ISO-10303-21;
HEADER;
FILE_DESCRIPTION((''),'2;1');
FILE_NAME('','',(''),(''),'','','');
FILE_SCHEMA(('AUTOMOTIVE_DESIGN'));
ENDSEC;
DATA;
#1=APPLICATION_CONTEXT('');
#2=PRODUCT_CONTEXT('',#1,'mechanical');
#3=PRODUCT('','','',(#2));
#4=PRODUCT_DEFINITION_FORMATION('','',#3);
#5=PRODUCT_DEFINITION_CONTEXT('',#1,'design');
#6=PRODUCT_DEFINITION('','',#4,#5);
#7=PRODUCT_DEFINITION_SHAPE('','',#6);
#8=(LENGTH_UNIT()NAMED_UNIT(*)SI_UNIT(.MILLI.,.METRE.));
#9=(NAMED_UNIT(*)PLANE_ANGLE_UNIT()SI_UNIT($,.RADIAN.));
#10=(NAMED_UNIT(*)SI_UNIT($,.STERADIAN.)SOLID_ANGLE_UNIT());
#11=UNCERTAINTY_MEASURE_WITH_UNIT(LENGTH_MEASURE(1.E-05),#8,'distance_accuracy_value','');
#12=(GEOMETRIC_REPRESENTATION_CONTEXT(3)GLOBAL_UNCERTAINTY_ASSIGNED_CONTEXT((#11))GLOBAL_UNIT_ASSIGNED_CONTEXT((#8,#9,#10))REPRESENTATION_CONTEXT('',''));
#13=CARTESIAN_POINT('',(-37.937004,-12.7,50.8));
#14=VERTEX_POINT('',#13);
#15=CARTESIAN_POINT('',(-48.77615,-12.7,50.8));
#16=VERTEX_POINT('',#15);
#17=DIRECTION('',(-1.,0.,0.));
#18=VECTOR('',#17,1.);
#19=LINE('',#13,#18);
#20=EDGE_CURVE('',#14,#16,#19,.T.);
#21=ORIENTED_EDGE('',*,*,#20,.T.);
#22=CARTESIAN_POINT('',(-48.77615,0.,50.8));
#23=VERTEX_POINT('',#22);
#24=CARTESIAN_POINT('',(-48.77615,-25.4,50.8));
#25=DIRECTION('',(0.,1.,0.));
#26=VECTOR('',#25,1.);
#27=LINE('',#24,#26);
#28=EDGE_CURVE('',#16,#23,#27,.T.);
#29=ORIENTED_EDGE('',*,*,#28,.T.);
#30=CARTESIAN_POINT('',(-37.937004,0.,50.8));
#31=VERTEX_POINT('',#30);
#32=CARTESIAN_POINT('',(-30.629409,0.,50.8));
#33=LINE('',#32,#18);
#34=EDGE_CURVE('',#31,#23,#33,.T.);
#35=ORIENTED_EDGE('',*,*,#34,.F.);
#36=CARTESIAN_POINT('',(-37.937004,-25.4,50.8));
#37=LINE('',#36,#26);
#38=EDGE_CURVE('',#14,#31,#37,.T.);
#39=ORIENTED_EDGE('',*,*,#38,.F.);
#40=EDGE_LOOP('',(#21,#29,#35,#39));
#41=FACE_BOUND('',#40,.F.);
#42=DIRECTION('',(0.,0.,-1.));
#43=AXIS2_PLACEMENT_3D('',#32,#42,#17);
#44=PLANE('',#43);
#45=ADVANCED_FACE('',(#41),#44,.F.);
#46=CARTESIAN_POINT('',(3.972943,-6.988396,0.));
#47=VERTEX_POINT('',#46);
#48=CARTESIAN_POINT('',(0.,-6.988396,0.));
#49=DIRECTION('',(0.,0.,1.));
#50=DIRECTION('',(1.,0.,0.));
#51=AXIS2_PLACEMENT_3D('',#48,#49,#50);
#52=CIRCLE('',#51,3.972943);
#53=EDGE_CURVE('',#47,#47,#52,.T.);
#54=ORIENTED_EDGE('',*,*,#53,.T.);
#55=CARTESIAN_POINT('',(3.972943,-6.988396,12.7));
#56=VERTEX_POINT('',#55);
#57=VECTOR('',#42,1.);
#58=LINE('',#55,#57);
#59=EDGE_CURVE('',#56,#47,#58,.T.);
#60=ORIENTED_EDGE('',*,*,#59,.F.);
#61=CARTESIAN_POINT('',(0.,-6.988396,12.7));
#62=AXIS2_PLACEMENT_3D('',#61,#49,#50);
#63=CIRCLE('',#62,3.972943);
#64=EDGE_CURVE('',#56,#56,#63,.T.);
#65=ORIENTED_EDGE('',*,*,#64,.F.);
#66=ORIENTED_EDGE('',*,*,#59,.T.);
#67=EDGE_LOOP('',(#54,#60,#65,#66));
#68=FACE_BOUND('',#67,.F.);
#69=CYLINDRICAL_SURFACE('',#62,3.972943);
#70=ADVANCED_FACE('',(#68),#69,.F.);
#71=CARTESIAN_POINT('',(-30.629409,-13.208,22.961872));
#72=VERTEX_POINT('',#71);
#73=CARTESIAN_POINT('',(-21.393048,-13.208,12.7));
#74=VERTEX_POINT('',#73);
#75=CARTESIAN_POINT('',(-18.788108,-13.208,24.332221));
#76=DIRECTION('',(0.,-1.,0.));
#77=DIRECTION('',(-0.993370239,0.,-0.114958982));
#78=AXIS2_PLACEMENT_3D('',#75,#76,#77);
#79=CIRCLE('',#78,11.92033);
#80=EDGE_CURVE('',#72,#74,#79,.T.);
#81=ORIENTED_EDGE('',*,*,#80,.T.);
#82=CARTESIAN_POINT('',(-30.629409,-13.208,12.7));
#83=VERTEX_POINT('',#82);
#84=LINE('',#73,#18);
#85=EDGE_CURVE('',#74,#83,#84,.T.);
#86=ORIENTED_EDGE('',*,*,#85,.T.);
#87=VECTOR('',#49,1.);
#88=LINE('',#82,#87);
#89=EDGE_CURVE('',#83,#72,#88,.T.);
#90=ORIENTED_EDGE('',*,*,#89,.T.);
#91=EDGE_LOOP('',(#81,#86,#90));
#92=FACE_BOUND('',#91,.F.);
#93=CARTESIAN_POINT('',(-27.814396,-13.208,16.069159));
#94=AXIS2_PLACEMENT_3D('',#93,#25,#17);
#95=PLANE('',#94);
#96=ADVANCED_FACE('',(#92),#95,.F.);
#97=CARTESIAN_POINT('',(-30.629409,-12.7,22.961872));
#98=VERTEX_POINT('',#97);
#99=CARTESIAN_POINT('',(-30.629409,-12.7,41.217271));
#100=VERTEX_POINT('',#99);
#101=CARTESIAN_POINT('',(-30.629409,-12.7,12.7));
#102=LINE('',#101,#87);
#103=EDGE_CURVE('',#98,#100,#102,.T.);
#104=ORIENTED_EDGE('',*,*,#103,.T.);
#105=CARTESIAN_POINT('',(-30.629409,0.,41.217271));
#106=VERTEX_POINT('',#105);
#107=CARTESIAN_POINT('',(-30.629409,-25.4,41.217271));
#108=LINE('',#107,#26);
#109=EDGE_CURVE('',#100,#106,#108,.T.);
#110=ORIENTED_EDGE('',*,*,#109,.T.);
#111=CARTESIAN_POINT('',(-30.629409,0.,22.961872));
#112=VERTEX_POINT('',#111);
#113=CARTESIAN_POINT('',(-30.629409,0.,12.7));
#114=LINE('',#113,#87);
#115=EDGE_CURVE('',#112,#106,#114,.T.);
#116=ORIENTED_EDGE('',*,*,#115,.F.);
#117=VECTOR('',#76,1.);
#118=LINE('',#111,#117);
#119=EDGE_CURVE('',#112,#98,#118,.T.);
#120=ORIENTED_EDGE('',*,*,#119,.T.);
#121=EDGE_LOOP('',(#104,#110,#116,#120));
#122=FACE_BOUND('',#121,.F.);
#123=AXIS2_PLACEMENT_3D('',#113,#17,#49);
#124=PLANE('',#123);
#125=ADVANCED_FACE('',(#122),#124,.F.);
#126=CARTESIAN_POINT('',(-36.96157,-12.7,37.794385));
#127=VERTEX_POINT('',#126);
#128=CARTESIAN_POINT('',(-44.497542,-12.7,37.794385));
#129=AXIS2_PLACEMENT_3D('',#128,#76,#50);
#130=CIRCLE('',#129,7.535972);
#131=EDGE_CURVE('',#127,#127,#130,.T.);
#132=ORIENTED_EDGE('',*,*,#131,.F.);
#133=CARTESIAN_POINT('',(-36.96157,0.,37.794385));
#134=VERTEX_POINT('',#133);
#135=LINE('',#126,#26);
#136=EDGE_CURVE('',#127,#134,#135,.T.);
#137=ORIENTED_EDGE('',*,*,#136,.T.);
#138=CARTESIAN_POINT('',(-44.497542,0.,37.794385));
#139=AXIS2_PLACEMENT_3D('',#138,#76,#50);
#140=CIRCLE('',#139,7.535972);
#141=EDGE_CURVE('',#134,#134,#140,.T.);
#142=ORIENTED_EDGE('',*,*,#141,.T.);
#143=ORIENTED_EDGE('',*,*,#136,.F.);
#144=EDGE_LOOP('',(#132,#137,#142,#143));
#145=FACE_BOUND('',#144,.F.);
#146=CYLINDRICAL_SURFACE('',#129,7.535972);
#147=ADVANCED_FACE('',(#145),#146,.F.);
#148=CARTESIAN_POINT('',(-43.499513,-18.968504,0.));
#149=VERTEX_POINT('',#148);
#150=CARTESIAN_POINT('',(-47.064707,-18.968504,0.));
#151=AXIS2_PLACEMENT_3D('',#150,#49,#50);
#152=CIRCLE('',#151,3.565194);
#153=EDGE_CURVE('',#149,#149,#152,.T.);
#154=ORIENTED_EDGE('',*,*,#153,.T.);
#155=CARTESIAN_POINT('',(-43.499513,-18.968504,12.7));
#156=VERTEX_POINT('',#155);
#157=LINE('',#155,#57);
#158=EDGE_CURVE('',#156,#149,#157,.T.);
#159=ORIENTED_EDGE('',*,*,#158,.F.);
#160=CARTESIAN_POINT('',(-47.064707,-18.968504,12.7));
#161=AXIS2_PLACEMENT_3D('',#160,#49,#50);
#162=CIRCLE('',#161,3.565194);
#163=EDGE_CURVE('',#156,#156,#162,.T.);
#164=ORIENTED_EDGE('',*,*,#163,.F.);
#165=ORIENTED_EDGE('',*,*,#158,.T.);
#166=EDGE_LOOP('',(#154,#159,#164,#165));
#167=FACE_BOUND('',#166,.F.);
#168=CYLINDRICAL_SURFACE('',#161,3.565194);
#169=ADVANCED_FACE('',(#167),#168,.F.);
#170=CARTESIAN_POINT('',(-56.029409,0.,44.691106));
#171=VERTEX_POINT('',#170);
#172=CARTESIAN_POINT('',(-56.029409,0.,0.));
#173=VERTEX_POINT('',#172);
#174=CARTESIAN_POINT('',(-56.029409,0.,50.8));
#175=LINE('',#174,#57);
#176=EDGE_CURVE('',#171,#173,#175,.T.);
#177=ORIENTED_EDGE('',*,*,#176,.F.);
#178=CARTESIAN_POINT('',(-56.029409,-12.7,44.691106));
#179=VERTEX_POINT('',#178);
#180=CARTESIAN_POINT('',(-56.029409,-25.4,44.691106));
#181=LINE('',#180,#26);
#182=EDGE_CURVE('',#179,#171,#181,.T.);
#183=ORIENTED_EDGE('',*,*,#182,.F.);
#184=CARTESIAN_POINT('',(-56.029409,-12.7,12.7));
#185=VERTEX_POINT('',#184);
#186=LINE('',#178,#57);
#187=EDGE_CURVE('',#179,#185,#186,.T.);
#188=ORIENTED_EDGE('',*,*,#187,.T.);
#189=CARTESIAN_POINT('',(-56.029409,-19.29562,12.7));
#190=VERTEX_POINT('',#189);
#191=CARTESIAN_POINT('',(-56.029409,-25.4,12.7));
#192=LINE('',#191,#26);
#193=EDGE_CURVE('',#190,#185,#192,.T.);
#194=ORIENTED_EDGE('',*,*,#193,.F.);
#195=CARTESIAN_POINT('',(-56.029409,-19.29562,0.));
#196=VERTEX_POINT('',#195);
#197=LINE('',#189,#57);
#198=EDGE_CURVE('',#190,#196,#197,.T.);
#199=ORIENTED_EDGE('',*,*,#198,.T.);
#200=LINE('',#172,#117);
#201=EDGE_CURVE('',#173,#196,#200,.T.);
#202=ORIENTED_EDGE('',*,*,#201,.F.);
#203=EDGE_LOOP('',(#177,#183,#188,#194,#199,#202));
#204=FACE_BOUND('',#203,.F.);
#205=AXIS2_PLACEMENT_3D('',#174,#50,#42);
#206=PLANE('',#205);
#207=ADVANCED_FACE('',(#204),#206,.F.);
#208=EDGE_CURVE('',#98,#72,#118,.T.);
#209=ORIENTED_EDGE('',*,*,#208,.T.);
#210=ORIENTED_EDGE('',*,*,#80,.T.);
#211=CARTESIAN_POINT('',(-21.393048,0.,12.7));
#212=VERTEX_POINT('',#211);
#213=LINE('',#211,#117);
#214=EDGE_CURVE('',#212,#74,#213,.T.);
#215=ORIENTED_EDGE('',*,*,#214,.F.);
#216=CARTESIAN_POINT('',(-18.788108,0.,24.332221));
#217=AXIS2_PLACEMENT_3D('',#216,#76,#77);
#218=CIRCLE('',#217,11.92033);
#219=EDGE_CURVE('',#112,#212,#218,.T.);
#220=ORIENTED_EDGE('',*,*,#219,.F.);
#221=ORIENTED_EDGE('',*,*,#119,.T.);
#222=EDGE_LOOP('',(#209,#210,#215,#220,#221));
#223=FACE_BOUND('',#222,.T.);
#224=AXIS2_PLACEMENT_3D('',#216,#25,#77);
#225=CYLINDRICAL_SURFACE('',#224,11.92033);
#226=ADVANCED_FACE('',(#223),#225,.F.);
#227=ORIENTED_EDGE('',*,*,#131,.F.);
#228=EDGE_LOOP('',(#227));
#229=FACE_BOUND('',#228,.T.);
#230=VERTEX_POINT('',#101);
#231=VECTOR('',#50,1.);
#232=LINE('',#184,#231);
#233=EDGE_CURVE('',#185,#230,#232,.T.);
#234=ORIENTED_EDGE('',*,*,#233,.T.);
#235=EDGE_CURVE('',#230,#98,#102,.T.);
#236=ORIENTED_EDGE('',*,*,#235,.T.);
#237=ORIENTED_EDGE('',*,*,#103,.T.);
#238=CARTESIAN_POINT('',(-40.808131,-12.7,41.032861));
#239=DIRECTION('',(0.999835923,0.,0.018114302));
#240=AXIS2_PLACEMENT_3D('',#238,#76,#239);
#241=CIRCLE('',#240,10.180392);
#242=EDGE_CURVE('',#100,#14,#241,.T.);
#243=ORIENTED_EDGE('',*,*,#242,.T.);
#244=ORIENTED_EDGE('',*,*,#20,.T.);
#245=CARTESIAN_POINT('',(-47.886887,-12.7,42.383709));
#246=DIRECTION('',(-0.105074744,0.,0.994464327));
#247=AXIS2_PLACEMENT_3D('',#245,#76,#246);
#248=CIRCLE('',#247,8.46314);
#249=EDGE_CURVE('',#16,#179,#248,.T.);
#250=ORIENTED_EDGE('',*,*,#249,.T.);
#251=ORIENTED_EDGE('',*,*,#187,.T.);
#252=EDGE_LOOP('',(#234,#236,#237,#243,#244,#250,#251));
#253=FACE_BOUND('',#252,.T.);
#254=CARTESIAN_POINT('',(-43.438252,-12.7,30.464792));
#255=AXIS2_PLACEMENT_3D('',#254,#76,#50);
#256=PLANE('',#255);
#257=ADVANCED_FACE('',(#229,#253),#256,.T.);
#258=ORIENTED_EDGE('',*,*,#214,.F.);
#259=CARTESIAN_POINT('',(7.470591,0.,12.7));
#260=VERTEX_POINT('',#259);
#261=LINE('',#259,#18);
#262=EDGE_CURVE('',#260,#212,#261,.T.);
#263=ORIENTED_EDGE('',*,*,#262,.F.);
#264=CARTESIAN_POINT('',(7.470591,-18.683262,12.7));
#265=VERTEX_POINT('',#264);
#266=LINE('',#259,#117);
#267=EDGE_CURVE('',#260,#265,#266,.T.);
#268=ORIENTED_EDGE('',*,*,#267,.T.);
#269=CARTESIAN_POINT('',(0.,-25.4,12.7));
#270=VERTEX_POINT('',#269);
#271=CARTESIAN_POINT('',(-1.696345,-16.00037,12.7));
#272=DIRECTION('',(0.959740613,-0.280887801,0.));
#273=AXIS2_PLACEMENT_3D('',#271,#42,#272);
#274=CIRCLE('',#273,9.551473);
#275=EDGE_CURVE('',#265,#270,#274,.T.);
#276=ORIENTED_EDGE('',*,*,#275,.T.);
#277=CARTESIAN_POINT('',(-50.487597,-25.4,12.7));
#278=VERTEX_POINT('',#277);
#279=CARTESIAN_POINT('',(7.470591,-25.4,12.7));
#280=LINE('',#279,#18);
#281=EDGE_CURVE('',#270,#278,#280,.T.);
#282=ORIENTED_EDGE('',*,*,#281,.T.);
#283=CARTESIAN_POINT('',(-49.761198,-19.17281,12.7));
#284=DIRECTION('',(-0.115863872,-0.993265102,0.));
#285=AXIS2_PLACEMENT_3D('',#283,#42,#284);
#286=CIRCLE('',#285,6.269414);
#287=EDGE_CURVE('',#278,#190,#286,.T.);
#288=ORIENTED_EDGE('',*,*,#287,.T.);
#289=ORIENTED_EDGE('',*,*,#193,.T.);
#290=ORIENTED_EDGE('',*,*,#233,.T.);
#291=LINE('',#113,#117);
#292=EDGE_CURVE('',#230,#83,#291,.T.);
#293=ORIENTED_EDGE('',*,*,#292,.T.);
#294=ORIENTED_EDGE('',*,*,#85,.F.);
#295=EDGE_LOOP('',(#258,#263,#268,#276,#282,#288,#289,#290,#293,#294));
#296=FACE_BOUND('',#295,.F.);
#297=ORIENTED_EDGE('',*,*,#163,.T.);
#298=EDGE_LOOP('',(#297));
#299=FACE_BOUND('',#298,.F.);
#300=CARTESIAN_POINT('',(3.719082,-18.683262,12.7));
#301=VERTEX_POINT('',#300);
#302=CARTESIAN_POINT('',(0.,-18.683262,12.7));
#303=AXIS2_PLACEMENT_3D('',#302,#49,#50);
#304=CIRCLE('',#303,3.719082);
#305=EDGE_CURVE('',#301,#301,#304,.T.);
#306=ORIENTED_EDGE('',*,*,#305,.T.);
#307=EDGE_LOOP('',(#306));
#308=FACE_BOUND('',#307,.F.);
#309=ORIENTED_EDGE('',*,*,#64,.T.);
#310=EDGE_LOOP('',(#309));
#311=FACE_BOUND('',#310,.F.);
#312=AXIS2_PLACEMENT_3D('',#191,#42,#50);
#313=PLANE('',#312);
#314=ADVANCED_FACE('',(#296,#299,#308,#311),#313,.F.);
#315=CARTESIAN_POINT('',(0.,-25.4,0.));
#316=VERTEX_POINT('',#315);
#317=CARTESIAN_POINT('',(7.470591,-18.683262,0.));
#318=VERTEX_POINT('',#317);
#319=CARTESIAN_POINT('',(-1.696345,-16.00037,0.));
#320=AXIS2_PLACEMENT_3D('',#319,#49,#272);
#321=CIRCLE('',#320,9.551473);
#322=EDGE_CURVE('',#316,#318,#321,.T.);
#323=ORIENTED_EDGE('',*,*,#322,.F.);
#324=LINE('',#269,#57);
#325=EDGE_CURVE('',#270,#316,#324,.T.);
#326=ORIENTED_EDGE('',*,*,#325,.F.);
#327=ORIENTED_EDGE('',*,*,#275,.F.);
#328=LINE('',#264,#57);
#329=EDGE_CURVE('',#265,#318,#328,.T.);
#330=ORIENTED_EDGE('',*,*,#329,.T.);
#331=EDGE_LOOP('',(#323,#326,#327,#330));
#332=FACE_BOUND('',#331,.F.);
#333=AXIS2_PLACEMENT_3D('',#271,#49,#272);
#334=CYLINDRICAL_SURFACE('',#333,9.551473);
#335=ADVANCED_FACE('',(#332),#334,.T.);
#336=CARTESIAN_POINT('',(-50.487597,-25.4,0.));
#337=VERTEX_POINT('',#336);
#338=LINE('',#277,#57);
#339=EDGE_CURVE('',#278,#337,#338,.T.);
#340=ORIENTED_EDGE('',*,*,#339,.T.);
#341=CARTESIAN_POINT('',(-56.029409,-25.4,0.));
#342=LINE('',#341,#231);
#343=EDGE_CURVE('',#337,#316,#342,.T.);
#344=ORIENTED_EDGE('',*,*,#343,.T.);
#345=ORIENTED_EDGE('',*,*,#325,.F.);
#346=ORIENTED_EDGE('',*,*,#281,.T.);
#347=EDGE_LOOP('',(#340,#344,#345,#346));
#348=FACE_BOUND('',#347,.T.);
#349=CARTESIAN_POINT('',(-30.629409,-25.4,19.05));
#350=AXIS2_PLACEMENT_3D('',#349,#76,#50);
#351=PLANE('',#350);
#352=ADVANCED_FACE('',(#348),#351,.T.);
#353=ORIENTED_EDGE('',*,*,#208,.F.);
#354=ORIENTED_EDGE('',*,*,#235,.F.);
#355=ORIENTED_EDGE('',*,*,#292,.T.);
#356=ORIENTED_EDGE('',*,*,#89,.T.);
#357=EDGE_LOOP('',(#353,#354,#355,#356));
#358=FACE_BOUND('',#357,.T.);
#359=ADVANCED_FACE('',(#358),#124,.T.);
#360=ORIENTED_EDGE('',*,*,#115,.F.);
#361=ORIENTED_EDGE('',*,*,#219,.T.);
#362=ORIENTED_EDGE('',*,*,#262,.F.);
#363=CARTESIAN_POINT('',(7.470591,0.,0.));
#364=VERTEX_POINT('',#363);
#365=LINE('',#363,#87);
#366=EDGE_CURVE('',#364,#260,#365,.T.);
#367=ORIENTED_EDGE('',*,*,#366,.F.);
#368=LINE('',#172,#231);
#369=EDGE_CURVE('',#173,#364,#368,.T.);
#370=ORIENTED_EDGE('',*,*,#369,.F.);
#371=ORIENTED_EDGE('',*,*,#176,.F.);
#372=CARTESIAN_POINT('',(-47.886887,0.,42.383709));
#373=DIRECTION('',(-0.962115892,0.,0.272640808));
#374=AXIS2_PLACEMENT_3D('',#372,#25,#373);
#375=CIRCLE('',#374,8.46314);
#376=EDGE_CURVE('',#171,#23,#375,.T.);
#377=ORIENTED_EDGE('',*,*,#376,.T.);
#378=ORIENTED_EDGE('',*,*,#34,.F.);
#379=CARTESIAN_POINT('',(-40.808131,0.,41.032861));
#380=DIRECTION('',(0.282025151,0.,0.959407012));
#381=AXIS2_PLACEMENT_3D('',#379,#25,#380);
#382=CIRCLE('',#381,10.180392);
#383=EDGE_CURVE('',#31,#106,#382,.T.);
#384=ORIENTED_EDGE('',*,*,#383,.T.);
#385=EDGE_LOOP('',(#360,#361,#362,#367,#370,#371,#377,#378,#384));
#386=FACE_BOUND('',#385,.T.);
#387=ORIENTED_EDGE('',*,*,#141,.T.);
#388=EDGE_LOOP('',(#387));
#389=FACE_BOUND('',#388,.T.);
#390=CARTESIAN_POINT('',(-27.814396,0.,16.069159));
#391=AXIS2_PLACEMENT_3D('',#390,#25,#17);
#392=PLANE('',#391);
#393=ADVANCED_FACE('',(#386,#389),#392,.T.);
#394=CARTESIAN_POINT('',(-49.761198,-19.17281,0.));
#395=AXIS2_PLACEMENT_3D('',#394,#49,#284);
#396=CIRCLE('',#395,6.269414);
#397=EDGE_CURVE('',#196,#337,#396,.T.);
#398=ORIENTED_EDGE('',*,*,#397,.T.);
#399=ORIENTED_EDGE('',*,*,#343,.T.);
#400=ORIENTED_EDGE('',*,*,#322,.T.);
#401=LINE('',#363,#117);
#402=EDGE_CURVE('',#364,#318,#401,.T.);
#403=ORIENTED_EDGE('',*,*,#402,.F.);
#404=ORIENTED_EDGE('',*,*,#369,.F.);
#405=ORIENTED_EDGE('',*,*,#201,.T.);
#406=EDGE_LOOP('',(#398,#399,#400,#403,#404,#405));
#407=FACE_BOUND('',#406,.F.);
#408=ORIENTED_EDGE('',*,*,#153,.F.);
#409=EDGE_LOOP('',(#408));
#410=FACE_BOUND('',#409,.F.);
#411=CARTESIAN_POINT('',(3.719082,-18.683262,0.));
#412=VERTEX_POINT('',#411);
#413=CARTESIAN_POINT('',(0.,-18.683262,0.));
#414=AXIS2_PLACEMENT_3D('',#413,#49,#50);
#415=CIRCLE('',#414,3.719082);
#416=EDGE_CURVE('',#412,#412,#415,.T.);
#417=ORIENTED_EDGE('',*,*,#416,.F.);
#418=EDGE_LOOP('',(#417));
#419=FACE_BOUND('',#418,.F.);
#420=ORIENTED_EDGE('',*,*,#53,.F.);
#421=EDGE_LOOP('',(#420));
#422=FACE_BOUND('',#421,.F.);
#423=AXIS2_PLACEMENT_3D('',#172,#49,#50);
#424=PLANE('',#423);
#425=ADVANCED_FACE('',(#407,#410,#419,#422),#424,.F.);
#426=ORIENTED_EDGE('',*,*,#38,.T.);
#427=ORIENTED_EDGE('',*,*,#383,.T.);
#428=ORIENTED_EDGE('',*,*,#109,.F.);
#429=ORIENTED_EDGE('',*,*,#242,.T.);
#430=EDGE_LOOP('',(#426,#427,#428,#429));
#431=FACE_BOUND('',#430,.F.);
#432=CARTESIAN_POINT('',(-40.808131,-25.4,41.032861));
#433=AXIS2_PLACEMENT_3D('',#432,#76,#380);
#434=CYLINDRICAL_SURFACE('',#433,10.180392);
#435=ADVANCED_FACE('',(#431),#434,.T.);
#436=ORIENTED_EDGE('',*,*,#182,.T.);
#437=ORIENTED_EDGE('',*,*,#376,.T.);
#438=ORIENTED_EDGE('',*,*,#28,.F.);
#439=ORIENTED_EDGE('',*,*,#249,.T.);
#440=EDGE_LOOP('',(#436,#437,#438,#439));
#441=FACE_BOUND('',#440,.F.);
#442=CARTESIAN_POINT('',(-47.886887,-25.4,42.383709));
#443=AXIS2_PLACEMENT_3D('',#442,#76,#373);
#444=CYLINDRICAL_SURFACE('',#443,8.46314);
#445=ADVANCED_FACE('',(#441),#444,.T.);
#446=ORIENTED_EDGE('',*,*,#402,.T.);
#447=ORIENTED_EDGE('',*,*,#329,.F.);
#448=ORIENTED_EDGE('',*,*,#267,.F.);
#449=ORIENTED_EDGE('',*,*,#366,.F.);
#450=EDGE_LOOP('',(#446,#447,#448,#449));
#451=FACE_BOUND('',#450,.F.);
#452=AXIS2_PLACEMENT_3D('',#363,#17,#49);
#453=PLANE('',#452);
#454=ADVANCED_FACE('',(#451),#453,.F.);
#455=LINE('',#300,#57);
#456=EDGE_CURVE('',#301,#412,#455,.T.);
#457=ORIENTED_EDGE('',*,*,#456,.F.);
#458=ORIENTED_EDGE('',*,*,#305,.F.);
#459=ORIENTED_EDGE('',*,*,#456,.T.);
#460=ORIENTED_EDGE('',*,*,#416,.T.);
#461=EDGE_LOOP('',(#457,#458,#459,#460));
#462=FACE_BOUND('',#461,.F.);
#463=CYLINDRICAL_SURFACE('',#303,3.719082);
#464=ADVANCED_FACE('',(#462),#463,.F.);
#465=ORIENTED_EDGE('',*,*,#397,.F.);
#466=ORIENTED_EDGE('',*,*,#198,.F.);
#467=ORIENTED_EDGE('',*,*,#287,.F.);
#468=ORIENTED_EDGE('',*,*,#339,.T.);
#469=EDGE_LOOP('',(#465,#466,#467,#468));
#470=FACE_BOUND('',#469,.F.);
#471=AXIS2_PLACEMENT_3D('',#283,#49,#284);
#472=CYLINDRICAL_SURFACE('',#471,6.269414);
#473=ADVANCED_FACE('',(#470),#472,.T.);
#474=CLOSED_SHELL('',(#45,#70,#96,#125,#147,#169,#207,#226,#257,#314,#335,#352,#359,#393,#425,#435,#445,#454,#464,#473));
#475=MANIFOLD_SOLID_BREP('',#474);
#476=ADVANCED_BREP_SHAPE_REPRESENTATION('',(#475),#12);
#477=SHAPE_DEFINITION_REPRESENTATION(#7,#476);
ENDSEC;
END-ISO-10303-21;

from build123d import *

# Parameters (mm, degrees)
F1_DEPTH  = 25.4
F3_DEPTH  = 25.4
F5_DEPTH  = 12.7
F6_R      = 7.5359717886
F7_DEPTH  = 25.4
F9_DEPTH  = 25.4
F11_DEPTH = 13.208
F12_R     = 3.5651940515
F12_R_2   = 3.719082418
F13_DEPTH = 25.4
F14_R     = 3.972943494
F15_DEPTH = 25.4


# Not quite as in the source:
# - a feature names something its author has since deleted; it is built from what else it names


with BuildPart() as f1:
    # F0 (on Front) → F1 (new body)
    with BuildSketch(Plane.XZ):
        Polygon((-56.0294090864, 50.8), (-56.0294090864, 0), (7.4705909136, 0), (7.4705909136, 12.7), (-30.6294090864, 12.7), (-30.6294090864, 50.8), align=None)
    extrude(amount=F1_DEPTH)

    # F2 (on face) → F3 (cut)
    with BuildSketch(Plane.XZ.offset(25.4)):
        with BuildLine():
            ThreePointArc((-56.0294090864, 44.6911064088), (-53.33876103, 48.8568702153), (-48.7761497498, 50.8))
            Line((-48.7761497498, 50.8), (-56.0294090864, 50.8))
            Line((-56.0294090864, 50.8), (-56.0294090864, 44.6911064088))
        make_face()
        with BuildLine():
            Line((-30.6294090864, 50.8), (-37.9370041192, 50.8))
            ThreePointArc((-37.9370041192, 50.8), (-32.7129588614, 47.2060747706), (-30.6294090864, 41.2172712386))
            Line((-30.6294090864, 41.2172712386), (-30.6294090864, 50.8))
        make_face()
    extrude(amount=-F3_DEPTH, mode=Mode.SUBTRACT)

    # F4 (on face) → F5 (cut)
    with BuildSketch(Plane.XZ.offset(25.4)):
        with BuildLine():
            Line((-56.0294090864, 12.7), (-30.6294090864, 12.7))
            Line((-30.6294090864, 12.7), (-30.6294090864, 41.2172712386))
            ThreePointArc((-30.6294090864, 41.2172712386), (-32.7129588614, 47.2060747706), (-37.9370041192, 50.8))
            Line((-37.9370041192, 50.8), (-48.7761497498, 50.8))
            ThreePointArc((-48.7761497498, 50.8), (-53.33876103, 48.8568702153), (-56.0294090864, 44.6911064088))
            Line((-56.0294090864, 44.6911064088), (-56.0294090864, 12.7))
        make_face()
    extrude(amount=-F5_DEPTH, mode=Mode.SUBTRACT)

    # F6 (on face) → F7 (cut)
    with BuildSketch(Plane.XZ.offset(12.7)):
        with Locations((-44.4975420833, 37.7943851054)):
            Circle(F6_R)
    extrude(amount=-F7_DEPTH, mode=Mode.SUBTRACT)

    # F8 (on face) → F9 (cut)
    with BuildSketch(Plane.XY.offset(12.7)):
        with BuildLine():
            Line((-56.0294090864, -25.4), (-50.4875965416, -25.4))
            ThreePointArc((-50.4875965416, -25.4), (-54.4030732732, -23.3868988254), (-56.0294090864, -19.2956195392))
            Line((-56.0294090864, -19.2956195392), (-56.0294090864, -25.4))
        make_face()
        with BuildLine():
            ThreePointArc((7.4705909136, -18.6832621694), (4.6896834238, -23.1031347869), (0, -25.4))
            Line((0, -25.4), (7.4705909136, -25.4))
            Line((7.4705909136, -25.4), (7.4705909136, -18.6832621694))
        make_face()
    extrude(amount=-F9_DEPTH, mode=Mode.SUBTRACT)

    # F10 (on face) → F11 (join)
    with BuildSketch(Plane(origin=(0, 0, 0), x_dir=(-1, 0, 0), z_dir=(0, 1, 0))):
        with BuildLine():
            ThreePointArc((30.6294090864, 22.9618716985), (27.6481288956, 16.3576173964), (21.3930476457, 12.7))
            Line((21.3930476457, 12.7), (30.6294090864, 12.7))
            Line((30.6294090864, 12.7), (30.6294090864, 22.9618716985))
        make_face()
    extrude(amount=-F11_DEPTH)

    # F12 (on face) → F13 (cut)
    with BuildSketch(Plane.XY.offset(12.7)):
        with Locations((-47.0647066832, -18.9685039222)):
            Circle(F12_R)
        with Locations((0, -18.6832621694)):
            Circle(F12_R_2)
    extrude(amount=-F13_DEPTH, mode=Mode.SUBTRACT)

    # F14 (on face) → F15 (cut)
    with BuildSketch(Plane.XY.offset(12.7)):
        with Locations((0, -6.9883959368)):
            Circle(F14_R)
    extrude(amount=-F15_DEPTH, mode=Mode.SUBTRACT)


solid = f1.part
